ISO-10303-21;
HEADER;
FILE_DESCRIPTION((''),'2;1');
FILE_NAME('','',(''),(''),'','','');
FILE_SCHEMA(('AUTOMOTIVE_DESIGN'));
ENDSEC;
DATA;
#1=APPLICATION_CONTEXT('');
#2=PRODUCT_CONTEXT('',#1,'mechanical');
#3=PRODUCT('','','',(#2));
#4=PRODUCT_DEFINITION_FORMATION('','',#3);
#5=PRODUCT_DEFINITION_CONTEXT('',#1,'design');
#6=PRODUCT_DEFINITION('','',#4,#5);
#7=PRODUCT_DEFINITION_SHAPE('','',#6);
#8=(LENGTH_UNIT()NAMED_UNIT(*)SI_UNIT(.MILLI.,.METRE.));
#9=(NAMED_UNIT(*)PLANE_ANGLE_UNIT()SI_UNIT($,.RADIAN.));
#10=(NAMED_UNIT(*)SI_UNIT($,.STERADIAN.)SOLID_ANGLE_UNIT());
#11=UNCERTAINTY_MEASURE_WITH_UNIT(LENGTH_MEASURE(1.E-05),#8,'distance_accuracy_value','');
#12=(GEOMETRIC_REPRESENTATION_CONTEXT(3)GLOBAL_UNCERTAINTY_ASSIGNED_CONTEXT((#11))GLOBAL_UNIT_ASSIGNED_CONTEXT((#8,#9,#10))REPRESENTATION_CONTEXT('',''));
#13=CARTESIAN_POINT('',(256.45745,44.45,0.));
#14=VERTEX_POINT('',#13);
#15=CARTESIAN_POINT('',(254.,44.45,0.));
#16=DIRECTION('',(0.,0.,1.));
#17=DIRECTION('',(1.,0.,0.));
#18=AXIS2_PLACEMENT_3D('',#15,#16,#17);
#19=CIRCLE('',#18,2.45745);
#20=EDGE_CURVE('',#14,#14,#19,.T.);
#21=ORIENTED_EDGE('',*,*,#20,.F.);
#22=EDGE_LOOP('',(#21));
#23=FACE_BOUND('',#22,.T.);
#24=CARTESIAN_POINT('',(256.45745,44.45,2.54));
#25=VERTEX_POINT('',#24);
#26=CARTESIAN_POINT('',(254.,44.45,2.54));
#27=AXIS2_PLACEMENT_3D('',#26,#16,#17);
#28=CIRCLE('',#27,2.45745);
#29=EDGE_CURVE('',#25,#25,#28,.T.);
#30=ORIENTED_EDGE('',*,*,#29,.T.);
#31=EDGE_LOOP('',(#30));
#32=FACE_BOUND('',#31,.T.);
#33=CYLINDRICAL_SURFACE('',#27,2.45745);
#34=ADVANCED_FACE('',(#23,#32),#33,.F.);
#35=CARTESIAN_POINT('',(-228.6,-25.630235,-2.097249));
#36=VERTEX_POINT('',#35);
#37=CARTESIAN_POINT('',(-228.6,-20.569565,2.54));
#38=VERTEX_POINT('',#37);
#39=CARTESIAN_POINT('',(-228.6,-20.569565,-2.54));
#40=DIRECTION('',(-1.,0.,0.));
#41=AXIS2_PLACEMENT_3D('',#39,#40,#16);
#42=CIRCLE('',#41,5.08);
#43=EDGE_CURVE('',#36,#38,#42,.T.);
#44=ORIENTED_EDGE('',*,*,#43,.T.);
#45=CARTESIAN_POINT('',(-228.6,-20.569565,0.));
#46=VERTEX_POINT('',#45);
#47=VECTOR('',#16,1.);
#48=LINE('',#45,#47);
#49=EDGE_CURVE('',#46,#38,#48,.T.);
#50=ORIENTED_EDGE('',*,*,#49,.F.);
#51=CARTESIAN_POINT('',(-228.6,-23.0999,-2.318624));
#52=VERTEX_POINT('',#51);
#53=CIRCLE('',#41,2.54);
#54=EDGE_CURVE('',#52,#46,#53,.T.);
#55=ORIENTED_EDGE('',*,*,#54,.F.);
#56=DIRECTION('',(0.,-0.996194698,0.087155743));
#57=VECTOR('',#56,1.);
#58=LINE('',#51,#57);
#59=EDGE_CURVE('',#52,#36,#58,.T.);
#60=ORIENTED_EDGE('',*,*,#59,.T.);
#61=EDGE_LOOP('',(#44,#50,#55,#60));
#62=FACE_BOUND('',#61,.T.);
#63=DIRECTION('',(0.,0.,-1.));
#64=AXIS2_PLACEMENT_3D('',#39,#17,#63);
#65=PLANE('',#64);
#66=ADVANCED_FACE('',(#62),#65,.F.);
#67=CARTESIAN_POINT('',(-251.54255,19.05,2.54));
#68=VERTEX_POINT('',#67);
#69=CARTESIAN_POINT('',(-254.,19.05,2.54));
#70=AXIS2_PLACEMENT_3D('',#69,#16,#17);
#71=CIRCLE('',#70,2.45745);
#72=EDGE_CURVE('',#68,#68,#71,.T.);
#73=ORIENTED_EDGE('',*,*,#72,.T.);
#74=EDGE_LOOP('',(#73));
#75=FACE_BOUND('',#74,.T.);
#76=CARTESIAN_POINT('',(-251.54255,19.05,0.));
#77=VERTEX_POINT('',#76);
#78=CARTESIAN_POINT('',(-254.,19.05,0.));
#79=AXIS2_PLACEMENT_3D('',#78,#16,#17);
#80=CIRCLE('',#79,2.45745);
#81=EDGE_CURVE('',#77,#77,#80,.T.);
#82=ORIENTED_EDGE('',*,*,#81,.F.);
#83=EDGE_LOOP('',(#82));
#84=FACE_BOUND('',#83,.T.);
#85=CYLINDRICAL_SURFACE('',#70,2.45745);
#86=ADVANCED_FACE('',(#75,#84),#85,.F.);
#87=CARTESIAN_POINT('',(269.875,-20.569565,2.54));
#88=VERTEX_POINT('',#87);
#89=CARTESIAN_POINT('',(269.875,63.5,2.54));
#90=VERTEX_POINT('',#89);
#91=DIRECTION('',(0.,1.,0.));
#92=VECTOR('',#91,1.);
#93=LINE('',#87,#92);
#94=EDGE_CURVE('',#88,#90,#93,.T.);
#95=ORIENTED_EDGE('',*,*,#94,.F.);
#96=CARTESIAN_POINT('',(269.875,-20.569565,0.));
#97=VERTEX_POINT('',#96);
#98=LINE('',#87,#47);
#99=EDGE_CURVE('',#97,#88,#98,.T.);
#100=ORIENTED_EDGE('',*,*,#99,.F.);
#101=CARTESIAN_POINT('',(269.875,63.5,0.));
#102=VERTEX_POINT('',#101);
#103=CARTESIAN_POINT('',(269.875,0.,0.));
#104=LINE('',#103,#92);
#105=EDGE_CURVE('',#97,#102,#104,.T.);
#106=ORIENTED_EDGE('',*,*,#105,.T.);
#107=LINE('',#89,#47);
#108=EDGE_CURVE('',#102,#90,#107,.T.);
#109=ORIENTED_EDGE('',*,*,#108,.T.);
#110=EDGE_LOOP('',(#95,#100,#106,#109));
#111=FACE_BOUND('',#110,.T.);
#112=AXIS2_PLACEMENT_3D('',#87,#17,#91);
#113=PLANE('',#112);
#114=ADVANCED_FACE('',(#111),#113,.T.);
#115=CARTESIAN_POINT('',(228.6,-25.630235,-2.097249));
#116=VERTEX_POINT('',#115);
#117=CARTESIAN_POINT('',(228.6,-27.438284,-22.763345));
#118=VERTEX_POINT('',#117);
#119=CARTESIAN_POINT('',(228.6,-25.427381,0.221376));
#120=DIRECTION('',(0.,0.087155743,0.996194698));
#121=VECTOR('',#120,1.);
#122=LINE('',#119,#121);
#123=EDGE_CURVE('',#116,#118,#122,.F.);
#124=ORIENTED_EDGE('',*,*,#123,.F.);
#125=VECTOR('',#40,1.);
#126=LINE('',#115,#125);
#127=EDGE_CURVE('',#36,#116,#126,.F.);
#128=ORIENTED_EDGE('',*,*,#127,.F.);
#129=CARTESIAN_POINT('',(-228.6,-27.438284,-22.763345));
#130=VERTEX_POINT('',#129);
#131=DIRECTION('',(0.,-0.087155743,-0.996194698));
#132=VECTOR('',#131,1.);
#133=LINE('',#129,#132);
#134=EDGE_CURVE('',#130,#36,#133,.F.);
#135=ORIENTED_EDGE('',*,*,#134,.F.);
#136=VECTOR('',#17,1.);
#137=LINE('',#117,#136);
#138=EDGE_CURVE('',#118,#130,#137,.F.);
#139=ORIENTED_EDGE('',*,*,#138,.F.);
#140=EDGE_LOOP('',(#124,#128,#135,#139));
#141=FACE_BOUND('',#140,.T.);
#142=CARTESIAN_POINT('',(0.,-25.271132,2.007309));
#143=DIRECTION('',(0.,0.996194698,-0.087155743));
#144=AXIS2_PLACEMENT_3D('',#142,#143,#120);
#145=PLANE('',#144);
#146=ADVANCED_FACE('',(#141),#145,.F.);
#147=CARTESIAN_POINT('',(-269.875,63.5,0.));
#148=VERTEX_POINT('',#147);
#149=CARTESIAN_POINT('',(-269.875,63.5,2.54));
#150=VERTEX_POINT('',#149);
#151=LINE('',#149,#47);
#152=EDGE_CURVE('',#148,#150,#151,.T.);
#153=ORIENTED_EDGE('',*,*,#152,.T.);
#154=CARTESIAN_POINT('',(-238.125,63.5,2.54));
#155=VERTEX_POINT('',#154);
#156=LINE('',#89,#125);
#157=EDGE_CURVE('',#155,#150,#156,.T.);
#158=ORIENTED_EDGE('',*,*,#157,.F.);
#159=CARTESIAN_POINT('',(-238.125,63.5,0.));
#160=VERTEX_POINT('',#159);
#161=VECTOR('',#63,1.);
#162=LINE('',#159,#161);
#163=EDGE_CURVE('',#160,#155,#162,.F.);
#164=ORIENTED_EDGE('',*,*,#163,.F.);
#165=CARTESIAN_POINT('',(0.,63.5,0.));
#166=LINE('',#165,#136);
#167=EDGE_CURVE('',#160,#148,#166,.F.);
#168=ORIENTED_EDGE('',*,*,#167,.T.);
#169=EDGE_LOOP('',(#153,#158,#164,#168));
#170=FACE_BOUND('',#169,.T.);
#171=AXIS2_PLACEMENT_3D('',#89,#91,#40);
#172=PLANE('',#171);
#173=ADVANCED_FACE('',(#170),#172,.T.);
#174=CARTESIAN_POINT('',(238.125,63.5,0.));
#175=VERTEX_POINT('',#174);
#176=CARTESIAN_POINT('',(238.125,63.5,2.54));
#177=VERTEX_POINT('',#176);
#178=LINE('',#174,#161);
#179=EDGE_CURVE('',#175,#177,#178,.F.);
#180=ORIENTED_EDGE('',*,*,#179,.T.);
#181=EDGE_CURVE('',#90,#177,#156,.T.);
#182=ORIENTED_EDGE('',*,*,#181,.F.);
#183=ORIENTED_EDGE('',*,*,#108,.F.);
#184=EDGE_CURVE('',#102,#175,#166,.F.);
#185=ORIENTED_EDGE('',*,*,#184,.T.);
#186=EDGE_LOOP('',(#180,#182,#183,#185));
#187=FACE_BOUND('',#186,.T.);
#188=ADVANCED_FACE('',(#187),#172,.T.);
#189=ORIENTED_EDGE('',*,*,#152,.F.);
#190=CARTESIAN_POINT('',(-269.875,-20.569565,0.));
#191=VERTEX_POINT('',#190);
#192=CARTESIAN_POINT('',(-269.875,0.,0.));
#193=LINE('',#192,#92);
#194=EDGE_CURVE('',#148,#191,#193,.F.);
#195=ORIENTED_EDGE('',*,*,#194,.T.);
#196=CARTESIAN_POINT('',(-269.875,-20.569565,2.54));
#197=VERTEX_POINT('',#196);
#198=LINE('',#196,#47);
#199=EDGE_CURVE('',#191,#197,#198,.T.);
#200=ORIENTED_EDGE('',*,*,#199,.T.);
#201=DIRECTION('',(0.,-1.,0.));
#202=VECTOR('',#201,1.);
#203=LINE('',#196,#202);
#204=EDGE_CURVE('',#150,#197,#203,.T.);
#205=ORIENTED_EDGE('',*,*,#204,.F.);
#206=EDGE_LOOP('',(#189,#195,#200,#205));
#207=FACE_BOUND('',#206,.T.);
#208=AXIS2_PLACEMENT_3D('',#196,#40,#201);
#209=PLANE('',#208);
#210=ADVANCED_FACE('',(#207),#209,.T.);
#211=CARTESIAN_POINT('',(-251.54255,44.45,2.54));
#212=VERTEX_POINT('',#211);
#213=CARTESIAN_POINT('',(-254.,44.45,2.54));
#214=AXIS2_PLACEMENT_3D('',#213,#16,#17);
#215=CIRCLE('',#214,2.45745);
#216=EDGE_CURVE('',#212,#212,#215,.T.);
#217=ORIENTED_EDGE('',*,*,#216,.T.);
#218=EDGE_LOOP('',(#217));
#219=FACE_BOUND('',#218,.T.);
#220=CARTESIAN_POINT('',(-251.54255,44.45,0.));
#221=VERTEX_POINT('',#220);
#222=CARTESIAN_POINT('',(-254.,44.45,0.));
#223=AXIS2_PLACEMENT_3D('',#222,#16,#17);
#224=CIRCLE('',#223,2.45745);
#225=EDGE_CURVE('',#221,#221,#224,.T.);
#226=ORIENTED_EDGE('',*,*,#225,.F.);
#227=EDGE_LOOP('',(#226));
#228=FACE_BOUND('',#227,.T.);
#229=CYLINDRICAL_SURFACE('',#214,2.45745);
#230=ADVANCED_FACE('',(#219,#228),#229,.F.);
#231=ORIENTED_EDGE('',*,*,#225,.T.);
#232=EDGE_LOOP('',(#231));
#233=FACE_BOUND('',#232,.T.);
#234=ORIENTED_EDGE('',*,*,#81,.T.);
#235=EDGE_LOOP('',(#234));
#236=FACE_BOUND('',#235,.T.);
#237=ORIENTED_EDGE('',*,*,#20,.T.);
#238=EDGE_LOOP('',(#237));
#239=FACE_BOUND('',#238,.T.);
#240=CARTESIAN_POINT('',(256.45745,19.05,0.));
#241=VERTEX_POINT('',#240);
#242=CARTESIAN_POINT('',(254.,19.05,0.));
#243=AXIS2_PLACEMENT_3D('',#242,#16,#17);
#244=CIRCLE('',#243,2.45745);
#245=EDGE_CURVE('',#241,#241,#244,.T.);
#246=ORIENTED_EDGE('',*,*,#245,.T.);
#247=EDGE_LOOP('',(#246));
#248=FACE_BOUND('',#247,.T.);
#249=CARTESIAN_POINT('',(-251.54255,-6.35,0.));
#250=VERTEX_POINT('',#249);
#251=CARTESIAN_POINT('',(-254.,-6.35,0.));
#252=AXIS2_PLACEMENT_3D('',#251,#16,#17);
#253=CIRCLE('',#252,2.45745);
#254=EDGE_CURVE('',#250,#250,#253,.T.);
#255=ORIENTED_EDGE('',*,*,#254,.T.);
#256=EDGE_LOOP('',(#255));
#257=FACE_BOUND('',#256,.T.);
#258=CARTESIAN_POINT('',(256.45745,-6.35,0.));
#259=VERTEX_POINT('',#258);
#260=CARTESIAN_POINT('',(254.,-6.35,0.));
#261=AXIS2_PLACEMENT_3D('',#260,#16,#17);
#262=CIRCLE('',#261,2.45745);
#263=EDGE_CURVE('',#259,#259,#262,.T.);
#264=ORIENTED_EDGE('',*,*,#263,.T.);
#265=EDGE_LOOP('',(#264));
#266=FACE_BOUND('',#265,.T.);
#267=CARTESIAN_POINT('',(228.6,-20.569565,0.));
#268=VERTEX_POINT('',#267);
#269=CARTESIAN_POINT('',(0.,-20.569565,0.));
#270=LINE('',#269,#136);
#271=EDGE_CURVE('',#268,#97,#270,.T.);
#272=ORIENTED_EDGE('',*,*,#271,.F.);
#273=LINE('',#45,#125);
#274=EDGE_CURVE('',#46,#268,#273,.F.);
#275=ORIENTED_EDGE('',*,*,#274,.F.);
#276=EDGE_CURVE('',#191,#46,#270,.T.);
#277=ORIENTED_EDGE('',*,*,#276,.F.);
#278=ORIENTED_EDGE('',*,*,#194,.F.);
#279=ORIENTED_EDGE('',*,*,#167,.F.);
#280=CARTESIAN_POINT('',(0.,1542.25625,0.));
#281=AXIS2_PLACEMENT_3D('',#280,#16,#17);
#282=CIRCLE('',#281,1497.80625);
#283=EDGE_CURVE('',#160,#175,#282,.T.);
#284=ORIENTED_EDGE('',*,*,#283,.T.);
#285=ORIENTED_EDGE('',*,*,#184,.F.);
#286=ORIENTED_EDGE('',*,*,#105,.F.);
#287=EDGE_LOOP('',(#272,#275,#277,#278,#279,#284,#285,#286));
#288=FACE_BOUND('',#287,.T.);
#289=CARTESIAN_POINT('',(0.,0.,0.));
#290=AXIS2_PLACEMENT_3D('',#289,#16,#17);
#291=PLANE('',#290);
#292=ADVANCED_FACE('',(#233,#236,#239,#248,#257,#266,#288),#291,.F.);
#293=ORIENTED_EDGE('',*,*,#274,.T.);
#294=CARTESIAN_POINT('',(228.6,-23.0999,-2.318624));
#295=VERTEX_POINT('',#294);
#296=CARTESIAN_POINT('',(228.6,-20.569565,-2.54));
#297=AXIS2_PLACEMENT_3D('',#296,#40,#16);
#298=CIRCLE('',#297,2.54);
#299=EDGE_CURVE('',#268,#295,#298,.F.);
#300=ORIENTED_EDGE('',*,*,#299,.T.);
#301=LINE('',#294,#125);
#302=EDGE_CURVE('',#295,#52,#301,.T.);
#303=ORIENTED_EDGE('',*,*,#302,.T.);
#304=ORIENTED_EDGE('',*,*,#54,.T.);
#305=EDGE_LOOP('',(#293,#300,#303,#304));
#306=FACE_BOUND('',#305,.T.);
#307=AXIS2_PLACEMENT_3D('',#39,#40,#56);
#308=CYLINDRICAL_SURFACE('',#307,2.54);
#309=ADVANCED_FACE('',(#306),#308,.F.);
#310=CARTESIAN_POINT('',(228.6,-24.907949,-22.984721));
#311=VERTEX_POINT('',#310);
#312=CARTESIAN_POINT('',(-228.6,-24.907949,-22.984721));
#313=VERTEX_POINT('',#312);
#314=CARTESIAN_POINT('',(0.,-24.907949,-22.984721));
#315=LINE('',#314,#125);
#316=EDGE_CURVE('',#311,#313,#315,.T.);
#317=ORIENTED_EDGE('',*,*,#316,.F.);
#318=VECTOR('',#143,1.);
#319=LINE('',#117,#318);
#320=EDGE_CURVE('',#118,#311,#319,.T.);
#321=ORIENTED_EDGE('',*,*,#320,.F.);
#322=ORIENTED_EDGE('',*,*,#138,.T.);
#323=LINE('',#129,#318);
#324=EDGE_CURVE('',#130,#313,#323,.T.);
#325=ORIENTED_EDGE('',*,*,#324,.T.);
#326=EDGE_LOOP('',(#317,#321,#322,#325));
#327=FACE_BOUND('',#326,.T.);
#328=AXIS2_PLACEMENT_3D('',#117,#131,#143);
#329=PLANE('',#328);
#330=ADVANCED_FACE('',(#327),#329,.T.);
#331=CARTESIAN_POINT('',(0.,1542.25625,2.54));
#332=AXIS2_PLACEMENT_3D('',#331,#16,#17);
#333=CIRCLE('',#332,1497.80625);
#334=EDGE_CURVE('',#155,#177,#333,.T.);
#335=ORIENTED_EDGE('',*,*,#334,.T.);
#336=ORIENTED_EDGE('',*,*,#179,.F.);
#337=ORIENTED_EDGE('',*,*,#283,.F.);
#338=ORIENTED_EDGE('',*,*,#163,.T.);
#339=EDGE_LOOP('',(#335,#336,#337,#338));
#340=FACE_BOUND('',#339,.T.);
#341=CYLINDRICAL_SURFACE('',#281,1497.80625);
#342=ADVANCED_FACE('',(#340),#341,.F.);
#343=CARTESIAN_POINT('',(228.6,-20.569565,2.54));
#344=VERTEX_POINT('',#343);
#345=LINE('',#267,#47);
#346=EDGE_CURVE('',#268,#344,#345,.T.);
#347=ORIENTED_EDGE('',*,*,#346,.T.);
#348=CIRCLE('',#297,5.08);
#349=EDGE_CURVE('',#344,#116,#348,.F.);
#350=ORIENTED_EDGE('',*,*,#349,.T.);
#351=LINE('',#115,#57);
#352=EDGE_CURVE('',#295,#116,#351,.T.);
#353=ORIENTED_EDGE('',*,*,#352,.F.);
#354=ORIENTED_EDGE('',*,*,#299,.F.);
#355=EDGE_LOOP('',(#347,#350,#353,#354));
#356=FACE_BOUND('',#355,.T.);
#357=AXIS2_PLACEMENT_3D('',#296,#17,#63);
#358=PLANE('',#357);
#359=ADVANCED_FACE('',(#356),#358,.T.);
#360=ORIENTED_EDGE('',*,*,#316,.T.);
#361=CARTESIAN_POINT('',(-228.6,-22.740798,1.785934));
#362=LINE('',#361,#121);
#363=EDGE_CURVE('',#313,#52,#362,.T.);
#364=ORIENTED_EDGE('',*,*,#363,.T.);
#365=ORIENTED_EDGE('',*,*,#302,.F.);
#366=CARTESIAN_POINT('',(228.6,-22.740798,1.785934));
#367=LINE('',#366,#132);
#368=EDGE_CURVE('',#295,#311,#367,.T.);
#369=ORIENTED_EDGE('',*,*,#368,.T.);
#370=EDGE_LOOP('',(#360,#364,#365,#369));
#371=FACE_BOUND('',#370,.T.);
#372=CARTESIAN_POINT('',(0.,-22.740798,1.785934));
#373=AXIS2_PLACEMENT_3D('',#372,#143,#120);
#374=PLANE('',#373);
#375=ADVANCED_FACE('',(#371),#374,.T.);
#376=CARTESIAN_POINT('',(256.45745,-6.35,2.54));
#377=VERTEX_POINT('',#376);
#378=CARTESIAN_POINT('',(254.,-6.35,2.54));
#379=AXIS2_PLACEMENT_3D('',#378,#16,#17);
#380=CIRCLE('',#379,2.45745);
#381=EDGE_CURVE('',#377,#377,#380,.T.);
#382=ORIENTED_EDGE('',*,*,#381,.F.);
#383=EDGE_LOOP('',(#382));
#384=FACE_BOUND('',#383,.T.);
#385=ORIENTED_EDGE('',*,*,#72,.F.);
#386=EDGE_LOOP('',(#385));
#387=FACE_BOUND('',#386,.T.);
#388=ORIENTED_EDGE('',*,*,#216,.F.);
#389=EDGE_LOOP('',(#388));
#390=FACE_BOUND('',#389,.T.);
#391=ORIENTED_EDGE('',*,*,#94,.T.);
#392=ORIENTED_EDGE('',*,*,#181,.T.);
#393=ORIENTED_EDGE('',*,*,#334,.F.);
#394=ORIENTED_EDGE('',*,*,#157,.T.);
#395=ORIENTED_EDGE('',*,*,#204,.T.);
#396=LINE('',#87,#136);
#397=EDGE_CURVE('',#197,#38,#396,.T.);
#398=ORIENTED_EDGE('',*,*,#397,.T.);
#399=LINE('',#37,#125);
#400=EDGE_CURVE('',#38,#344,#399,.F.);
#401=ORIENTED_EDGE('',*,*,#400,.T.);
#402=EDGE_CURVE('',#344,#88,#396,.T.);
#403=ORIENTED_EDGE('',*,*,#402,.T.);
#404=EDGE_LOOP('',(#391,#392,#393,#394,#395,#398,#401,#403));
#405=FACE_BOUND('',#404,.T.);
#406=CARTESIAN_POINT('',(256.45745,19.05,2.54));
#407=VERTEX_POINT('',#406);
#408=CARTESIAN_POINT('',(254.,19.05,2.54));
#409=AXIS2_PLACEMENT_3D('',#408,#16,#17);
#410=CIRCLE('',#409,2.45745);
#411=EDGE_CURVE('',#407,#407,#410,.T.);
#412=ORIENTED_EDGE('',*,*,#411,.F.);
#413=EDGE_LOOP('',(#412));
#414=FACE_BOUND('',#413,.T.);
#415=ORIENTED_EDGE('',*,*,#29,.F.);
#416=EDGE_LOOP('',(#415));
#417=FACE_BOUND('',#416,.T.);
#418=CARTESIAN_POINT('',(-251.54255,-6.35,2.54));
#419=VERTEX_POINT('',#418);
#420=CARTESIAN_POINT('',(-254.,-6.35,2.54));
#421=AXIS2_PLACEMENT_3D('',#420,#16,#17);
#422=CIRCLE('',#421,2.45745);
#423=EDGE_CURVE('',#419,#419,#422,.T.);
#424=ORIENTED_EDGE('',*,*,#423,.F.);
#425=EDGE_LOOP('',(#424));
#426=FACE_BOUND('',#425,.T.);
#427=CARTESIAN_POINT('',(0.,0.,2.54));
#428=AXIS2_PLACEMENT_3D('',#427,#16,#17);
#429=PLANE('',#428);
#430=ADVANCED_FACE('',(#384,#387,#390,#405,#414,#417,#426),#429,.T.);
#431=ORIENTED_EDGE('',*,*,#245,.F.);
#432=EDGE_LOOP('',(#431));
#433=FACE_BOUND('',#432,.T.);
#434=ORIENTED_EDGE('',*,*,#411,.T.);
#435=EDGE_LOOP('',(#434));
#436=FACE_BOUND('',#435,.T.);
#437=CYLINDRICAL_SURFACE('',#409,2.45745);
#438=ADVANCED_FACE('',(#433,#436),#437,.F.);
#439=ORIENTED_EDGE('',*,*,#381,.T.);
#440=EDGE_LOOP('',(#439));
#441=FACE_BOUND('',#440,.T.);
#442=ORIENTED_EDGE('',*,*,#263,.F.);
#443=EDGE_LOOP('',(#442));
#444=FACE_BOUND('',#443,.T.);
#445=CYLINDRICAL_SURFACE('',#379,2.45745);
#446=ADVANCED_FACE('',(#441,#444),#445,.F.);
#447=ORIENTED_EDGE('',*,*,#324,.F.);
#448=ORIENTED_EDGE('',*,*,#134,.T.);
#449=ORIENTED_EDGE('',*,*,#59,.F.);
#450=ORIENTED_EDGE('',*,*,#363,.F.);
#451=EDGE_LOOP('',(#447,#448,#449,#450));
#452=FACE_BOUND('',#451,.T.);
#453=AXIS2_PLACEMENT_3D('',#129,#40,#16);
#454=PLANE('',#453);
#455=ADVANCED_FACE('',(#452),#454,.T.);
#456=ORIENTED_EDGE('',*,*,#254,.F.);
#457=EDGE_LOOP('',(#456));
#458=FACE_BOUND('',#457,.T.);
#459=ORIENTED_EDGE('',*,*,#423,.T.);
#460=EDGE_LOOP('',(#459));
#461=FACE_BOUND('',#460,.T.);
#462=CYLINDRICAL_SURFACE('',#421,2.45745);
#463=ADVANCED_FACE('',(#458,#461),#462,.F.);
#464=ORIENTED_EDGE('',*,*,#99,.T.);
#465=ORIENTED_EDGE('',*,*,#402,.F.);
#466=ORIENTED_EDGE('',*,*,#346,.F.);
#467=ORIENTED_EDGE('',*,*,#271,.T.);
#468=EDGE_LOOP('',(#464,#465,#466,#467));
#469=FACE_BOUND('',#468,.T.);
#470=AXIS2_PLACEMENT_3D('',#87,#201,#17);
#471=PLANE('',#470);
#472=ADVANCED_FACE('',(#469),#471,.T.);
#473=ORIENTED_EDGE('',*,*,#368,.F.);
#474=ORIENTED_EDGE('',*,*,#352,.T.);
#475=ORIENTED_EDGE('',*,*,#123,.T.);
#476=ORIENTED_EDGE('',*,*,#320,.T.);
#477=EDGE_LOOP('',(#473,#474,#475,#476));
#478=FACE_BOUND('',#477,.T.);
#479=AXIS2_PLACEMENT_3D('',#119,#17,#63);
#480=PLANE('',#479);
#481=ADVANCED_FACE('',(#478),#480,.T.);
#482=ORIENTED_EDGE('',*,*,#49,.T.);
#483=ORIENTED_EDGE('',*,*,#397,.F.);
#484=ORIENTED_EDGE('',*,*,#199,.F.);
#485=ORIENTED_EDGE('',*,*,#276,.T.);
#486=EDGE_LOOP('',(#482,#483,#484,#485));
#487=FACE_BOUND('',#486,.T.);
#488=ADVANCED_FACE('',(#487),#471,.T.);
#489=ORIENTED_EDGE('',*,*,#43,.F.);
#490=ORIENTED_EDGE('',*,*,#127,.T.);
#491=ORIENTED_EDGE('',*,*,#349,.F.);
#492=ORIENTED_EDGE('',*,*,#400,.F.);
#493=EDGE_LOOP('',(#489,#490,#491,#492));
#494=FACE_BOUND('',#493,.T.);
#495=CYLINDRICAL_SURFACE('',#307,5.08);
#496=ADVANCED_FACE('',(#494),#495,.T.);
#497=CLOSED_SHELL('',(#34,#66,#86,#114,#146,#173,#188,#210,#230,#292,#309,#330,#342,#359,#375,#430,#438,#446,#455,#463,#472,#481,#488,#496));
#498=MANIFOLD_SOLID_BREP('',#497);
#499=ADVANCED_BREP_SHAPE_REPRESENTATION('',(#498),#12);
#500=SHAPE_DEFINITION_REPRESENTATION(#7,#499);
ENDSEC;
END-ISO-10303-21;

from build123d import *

# Parameters (mm, degrees)
SKETCH2_W             = 539.75
SKETCH2_H             = 84.069565479
BOSS_EXTRUDE1_DEPTH   = 2.54
EDGE_FLANGE1_DEPTH    = 457.2
CUT_EXTRUDE2_DEPTH    = 279.417450967
F_8_CLEARANCE_HOLE1_D = 4.9149


# Sheet-metal steps are written as plain solids
with BuildPart() as part:
    # Sketch2 → Boss-Extrude1 (new body)
    with BuildSketch(Plane.XY):
        with Locations((0, 21.465217261)):
            Rectangle(SKETCH2_W, SKETCH2_H)
    extrude(amount=BOSS_EXTRUDE1_DEPTH)

    # Edge-Flange1 section (across the edge) → Edge-Flange1 (add)
    with BuildSketch(Plane(origin=(228.6, -22.897046661, 0), x_dir=(0, 0.9961946980917445, -0.08715574274766974), z_dir=(-1, 0, 0))):
        with BuildLine():
            Line((-2.54, 2.327481182), (-2.54, 23.072518818))
            Line((-2.54, 23.072518818), (0, 23.072518818))
            Line((0, 23.072518818), (0, 2.327481182))
            ThreePointArc((0, 2.327481182), (0.667315565, 0.611482055), (2.318624413, -0.202853351))
            Line((2.318624413, -0.202853351), (2.097248827, -2.733187884))
            ThreePointArc((2.097248827, -2.733187884), (-1.205368871, -1.104517073), (-2.54, 2.327481182))
        make_face()
    extrude(amount=EDGE_FLANGE1_DEPTH)

    # Sketch17 → Cut-Extrude2 (cut, through all)
    with BuildSketch(Plane.XY.offset(2.54)):
        with BuildLine():
            Line((-238.125, 63.5), (238.125, 63.5))
            ThreePointArc((238.125, 63.5), (0, 44.45), (-238.125, 63.5))
        make_face()
    extrude(amount=-CUT_EXTRUDE2_DEPTH, mode=Mode.SUBTRACT)

    # #8 Clearance Hole1 (through all)
    with Locations(Plane.XY.offset(2.54)):
        with Locations((-254, 44.45), (-254, 19.05), (-254, -6.35), (254, -6.35), (254, 19.05), (254, 44.45)):
            Hole(F_8_CLEARANCE_HOLE1_D / 2)


solid = part.part
